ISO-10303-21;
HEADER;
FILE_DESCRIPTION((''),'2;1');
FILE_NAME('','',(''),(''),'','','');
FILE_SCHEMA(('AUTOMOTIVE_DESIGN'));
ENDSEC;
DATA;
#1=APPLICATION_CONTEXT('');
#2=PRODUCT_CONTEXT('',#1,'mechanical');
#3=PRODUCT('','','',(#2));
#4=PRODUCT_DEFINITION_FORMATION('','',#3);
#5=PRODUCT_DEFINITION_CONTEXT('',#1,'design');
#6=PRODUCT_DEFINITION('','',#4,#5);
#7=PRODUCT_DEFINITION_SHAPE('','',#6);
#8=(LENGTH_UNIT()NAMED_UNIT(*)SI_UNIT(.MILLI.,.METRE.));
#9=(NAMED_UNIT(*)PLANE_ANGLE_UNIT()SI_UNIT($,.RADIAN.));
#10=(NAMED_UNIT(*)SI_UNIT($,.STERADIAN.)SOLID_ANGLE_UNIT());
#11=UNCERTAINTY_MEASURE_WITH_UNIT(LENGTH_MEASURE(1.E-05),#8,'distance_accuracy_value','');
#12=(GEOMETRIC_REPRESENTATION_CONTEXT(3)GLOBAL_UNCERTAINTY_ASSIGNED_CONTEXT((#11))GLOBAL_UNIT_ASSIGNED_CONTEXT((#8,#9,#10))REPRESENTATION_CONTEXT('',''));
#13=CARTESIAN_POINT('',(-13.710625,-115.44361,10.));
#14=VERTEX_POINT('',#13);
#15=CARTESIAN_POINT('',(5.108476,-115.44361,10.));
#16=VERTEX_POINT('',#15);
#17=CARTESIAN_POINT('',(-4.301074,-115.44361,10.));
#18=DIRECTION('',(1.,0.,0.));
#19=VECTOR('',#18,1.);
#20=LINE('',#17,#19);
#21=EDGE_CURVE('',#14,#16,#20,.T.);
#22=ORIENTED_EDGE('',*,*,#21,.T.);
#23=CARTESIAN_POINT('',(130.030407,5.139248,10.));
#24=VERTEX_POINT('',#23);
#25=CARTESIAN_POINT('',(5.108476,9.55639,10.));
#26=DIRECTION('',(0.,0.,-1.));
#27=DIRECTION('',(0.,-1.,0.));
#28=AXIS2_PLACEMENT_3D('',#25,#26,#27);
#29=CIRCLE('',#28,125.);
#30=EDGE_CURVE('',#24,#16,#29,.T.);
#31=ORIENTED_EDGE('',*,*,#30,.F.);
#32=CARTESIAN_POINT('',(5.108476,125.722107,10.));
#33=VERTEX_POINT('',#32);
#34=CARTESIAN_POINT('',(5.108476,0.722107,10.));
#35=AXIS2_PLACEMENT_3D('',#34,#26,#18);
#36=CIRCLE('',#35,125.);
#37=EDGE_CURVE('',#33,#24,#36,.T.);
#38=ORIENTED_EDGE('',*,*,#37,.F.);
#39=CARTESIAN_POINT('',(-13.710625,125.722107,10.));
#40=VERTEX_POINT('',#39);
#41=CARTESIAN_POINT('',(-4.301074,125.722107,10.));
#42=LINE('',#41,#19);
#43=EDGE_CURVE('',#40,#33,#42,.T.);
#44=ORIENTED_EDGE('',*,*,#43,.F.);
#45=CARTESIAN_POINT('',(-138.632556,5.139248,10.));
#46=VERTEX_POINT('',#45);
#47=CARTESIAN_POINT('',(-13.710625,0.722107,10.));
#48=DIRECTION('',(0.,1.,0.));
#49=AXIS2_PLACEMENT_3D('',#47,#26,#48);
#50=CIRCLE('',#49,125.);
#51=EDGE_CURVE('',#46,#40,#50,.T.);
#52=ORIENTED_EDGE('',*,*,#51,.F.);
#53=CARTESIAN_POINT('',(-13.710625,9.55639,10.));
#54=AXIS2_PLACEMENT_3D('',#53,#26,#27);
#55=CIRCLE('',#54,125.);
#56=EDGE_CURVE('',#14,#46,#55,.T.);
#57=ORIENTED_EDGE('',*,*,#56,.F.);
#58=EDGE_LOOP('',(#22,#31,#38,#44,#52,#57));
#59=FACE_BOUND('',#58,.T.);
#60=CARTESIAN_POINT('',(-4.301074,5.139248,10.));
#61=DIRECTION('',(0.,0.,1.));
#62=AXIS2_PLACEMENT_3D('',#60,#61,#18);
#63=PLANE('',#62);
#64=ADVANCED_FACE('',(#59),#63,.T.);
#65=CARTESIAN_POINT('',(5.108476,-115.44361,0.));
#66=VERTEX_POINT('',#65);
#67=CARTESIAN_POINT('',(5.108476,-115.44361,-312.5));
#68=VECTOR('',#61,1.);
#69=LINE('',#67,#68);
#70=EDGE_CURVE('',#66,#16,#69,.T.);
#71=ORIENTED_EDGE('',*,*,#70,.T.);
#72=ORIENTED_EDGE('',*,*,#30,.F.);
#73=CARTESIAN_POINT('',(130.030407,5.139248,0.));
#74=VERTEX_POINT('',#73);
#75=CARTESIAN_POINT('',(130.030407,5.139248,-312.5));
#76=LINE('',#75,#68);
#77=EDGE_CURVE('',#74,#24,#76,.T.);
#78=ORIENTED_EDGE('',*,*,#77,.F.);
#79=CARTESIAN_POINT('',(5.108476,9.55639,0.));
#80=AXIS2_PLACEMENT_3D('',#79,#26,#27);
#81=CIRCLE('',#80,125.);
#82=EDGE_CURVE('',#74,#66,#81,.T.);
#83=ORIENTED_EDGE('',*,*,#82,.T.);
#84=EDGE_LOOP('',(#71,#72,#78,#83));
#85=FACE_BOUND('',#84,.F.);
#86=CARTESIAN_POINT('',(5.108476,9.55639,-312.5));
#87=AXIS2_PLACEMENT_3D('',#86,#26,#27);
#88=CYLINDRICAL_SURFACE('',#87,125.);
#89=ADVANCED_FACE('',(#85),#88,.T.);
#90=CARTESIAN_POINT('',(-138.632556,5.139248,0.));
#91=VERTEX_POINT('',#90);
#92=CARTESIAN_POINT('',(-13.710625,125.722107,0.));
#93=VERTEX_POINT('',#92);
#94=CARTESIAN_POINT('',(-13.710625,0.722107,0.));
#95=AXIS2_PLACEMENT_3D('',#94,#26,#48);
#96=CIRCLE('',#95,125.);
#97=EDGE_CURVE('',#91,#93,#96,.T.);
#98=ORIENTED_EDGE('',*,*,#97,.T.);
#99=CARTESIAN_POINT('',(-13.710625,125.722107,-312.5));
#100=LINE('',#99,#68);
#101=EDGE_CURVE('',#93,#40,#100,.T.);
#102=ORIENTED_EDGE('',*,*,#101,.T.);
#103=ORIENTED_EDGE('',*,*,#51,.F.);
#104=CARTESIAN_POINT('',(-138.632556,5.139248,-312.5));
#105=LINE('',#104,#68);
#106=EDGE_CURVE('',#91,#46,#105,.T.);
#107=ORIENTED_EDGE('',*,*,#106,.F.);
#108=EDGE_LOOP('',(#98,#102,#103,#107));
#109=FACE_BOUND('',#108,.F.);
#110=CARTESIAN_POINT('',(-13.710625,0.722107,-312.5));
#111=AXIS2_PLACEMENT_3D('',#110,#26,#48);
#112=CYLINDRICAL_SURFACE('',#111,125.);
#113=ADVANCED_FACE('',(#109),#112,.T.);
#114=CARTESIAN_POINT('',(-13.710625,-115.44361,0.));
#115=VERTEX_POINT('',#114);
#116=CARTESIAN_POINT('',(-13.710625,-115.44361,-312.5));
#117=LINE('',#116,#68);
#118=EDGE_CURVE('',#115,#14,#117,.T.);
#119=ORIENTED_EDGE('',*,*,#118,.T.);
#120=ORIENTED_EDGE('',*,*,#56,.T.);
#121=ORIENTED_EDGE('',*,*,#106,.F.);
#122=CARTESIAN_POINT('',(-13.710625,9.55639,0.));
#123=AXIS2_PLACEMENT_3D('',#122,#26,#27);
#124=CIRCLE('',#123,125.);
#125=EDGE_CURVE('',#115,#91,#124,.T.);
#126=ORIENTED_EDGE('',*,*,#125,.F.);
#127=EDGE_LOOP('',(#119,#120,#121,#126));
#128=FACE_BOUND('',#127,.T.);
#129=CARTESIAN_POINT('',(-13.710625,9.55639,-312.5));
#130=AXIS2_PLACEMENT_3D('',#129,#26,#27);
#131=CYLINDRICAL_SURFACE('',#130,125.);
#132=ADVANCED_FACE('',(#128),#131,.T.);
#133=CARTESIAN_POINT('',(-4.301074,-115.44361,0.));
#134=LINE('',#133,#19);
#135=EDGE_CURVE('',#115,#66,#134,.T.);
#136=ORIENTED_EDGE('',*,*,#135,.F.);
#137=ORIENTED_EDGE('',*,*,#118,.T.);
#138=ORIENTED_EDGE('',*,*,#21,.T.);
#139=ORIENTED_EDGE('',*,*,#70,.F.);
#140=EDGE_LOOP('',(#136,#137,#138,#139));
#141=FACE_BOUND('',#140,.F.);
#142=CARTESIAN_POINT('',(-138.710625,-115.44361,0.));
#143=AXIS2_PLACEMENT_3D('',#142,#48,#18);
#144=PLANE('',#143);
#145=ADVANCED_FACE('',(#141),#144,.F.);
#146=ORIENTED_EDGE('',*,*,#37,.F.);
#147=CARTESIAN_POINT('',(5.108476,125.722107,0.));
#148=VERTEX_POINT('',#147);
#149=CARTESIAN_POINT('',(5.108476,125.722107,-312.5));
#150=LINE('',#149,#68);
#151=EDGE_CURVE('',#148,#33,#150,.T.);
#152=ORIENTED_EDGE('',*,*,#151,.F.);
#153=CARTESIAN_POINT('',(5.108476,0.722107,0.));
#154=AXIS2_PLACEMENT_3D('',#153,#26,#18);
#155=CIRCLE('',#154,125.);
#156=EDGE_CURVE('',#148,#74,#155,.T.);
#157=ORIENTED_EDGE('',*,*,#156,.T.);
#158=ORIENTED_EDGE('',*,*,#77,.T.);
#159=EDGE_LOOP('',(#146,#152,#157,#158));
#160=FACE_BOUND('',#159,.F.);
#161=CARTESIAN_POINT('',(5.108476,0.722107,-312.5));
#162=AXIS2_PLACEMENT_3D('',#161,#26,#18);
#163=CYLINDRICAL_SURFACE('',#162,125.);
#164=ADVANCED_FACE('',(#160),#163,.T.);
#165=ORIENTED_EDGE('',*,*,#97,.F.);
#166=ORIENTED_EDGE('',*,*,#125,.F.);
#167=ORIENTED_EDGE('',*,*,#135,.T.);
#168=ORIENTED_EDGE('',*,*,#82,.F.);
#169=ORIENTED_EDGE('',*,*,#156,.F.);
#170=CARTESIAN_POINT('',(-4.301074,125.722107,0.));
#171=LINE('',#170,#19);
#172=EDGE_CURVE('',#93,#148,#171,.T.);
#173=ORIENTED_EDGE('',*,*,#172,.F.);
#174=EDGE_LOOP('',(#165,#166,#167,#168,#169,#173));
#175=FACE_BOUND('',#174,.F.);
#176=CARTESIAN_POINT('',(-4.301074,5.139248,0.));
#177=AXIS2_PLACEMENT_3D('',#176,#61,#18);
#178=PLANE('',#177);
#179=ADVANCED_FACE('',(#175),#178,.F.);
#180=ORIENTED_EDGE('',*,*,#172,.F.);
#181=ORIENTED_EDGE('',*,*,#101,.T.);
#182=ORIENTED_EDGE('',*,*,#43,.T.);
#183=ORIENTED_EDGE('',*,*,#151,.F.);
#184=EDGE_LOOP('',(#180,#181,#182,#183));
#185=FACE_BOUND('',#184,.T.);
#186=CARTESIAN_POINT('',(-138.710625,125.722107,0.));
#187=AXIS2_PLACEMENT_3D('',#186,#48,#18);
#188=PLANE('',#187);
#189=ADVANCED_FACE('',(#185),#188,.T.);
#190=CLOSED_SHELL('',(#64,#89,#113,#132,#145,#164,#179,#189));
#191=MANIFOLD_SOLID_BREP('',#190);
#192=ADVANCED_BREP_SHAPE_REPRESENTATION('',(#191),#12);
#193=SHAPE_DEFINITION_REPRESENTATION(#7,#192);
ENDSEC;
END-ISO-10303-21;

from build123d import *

# Parameters (mm, degrees)
F0_W        = 268.8191002235
F0_H        = 241.1657162011
F1_DEPTH    = 10
F2_T1_DEPTH = 635


# Not quite as in the source:
# - a fillet or chamfer that OpenCascade refuses, or shapes differently, is made with other operations: its cross-section is extruded or revolved along the edge and cut away or added


with BuildPart() as f1:
    # F0 (on Top) → F1 (new body)
    with BuildSketch(Plane.XY):
        with Locations((-4.3010744266, 5.1392484456)):
            Rectangle(F0_W, F0_H)
    extrude(amount=F1_DEPTH)

    # F2: fillet of radius 125 on 4 edges, made by hand

    # F2_s2 → F2_t1 (cut)
    with BuildSketch(Plane.XY.offset(-312.5)):
        with BuildLine():
            ThreePointArc((-13.7106245384, -115.4436096549), (-102.0989721867, -78.8319573032), (-138.7106245384, 9.5563903451))
            Line((-138.7106245384, 9.5563903451), (-138.7106245384, -115.4436096549))
            Line((-138.7106245384, -115.4436096549), (-13.7106245384, -115.4436096549))
        make_face()
        with BuildLine():
            ThreePointArc((5.1084756851, -115.4436096549), (93.4968233334, -78.8319573032), (130.1084756851, 9.5563903451))
            Line((130.1084756851, 9.5563903451), (130.1084756851, -115.4436096549))
            Line((130.1084756851, -115.4436096549), (5.1084756851, -115.4436096549))
        make_face()
        with BuildLine():
            ThreePointArc((130.1084756851, 0.7221065462), (93.4968233334, 89.1104541945), (5.1084756851, 125.7221065462))
            Line((5.1084756851, 125.7221065462), (130.1084756851, 125.7221065462))
            Line((130.1084756851, 125.7221065462), (130.1084756851, 0.7221065462))
        make_face()
        with BuildLine():
            ThreePointArc((-13.7106245384, 125.7221065462), (-102.0989721867, 89.1104541945), (-138.7106245384, 0.7221065462))
            Line((-138.7106245384, 0.7221065462), (-138.7106245384, 125.7221065462))
            Line((-138.7106245384, 125.7221065462), (-13.7106245384, 125.7221065462))
        make_face()
    extrude(amount=F2_T1_DEPTH, mode=Mode.SUBTRACT)


solid = f1.part
